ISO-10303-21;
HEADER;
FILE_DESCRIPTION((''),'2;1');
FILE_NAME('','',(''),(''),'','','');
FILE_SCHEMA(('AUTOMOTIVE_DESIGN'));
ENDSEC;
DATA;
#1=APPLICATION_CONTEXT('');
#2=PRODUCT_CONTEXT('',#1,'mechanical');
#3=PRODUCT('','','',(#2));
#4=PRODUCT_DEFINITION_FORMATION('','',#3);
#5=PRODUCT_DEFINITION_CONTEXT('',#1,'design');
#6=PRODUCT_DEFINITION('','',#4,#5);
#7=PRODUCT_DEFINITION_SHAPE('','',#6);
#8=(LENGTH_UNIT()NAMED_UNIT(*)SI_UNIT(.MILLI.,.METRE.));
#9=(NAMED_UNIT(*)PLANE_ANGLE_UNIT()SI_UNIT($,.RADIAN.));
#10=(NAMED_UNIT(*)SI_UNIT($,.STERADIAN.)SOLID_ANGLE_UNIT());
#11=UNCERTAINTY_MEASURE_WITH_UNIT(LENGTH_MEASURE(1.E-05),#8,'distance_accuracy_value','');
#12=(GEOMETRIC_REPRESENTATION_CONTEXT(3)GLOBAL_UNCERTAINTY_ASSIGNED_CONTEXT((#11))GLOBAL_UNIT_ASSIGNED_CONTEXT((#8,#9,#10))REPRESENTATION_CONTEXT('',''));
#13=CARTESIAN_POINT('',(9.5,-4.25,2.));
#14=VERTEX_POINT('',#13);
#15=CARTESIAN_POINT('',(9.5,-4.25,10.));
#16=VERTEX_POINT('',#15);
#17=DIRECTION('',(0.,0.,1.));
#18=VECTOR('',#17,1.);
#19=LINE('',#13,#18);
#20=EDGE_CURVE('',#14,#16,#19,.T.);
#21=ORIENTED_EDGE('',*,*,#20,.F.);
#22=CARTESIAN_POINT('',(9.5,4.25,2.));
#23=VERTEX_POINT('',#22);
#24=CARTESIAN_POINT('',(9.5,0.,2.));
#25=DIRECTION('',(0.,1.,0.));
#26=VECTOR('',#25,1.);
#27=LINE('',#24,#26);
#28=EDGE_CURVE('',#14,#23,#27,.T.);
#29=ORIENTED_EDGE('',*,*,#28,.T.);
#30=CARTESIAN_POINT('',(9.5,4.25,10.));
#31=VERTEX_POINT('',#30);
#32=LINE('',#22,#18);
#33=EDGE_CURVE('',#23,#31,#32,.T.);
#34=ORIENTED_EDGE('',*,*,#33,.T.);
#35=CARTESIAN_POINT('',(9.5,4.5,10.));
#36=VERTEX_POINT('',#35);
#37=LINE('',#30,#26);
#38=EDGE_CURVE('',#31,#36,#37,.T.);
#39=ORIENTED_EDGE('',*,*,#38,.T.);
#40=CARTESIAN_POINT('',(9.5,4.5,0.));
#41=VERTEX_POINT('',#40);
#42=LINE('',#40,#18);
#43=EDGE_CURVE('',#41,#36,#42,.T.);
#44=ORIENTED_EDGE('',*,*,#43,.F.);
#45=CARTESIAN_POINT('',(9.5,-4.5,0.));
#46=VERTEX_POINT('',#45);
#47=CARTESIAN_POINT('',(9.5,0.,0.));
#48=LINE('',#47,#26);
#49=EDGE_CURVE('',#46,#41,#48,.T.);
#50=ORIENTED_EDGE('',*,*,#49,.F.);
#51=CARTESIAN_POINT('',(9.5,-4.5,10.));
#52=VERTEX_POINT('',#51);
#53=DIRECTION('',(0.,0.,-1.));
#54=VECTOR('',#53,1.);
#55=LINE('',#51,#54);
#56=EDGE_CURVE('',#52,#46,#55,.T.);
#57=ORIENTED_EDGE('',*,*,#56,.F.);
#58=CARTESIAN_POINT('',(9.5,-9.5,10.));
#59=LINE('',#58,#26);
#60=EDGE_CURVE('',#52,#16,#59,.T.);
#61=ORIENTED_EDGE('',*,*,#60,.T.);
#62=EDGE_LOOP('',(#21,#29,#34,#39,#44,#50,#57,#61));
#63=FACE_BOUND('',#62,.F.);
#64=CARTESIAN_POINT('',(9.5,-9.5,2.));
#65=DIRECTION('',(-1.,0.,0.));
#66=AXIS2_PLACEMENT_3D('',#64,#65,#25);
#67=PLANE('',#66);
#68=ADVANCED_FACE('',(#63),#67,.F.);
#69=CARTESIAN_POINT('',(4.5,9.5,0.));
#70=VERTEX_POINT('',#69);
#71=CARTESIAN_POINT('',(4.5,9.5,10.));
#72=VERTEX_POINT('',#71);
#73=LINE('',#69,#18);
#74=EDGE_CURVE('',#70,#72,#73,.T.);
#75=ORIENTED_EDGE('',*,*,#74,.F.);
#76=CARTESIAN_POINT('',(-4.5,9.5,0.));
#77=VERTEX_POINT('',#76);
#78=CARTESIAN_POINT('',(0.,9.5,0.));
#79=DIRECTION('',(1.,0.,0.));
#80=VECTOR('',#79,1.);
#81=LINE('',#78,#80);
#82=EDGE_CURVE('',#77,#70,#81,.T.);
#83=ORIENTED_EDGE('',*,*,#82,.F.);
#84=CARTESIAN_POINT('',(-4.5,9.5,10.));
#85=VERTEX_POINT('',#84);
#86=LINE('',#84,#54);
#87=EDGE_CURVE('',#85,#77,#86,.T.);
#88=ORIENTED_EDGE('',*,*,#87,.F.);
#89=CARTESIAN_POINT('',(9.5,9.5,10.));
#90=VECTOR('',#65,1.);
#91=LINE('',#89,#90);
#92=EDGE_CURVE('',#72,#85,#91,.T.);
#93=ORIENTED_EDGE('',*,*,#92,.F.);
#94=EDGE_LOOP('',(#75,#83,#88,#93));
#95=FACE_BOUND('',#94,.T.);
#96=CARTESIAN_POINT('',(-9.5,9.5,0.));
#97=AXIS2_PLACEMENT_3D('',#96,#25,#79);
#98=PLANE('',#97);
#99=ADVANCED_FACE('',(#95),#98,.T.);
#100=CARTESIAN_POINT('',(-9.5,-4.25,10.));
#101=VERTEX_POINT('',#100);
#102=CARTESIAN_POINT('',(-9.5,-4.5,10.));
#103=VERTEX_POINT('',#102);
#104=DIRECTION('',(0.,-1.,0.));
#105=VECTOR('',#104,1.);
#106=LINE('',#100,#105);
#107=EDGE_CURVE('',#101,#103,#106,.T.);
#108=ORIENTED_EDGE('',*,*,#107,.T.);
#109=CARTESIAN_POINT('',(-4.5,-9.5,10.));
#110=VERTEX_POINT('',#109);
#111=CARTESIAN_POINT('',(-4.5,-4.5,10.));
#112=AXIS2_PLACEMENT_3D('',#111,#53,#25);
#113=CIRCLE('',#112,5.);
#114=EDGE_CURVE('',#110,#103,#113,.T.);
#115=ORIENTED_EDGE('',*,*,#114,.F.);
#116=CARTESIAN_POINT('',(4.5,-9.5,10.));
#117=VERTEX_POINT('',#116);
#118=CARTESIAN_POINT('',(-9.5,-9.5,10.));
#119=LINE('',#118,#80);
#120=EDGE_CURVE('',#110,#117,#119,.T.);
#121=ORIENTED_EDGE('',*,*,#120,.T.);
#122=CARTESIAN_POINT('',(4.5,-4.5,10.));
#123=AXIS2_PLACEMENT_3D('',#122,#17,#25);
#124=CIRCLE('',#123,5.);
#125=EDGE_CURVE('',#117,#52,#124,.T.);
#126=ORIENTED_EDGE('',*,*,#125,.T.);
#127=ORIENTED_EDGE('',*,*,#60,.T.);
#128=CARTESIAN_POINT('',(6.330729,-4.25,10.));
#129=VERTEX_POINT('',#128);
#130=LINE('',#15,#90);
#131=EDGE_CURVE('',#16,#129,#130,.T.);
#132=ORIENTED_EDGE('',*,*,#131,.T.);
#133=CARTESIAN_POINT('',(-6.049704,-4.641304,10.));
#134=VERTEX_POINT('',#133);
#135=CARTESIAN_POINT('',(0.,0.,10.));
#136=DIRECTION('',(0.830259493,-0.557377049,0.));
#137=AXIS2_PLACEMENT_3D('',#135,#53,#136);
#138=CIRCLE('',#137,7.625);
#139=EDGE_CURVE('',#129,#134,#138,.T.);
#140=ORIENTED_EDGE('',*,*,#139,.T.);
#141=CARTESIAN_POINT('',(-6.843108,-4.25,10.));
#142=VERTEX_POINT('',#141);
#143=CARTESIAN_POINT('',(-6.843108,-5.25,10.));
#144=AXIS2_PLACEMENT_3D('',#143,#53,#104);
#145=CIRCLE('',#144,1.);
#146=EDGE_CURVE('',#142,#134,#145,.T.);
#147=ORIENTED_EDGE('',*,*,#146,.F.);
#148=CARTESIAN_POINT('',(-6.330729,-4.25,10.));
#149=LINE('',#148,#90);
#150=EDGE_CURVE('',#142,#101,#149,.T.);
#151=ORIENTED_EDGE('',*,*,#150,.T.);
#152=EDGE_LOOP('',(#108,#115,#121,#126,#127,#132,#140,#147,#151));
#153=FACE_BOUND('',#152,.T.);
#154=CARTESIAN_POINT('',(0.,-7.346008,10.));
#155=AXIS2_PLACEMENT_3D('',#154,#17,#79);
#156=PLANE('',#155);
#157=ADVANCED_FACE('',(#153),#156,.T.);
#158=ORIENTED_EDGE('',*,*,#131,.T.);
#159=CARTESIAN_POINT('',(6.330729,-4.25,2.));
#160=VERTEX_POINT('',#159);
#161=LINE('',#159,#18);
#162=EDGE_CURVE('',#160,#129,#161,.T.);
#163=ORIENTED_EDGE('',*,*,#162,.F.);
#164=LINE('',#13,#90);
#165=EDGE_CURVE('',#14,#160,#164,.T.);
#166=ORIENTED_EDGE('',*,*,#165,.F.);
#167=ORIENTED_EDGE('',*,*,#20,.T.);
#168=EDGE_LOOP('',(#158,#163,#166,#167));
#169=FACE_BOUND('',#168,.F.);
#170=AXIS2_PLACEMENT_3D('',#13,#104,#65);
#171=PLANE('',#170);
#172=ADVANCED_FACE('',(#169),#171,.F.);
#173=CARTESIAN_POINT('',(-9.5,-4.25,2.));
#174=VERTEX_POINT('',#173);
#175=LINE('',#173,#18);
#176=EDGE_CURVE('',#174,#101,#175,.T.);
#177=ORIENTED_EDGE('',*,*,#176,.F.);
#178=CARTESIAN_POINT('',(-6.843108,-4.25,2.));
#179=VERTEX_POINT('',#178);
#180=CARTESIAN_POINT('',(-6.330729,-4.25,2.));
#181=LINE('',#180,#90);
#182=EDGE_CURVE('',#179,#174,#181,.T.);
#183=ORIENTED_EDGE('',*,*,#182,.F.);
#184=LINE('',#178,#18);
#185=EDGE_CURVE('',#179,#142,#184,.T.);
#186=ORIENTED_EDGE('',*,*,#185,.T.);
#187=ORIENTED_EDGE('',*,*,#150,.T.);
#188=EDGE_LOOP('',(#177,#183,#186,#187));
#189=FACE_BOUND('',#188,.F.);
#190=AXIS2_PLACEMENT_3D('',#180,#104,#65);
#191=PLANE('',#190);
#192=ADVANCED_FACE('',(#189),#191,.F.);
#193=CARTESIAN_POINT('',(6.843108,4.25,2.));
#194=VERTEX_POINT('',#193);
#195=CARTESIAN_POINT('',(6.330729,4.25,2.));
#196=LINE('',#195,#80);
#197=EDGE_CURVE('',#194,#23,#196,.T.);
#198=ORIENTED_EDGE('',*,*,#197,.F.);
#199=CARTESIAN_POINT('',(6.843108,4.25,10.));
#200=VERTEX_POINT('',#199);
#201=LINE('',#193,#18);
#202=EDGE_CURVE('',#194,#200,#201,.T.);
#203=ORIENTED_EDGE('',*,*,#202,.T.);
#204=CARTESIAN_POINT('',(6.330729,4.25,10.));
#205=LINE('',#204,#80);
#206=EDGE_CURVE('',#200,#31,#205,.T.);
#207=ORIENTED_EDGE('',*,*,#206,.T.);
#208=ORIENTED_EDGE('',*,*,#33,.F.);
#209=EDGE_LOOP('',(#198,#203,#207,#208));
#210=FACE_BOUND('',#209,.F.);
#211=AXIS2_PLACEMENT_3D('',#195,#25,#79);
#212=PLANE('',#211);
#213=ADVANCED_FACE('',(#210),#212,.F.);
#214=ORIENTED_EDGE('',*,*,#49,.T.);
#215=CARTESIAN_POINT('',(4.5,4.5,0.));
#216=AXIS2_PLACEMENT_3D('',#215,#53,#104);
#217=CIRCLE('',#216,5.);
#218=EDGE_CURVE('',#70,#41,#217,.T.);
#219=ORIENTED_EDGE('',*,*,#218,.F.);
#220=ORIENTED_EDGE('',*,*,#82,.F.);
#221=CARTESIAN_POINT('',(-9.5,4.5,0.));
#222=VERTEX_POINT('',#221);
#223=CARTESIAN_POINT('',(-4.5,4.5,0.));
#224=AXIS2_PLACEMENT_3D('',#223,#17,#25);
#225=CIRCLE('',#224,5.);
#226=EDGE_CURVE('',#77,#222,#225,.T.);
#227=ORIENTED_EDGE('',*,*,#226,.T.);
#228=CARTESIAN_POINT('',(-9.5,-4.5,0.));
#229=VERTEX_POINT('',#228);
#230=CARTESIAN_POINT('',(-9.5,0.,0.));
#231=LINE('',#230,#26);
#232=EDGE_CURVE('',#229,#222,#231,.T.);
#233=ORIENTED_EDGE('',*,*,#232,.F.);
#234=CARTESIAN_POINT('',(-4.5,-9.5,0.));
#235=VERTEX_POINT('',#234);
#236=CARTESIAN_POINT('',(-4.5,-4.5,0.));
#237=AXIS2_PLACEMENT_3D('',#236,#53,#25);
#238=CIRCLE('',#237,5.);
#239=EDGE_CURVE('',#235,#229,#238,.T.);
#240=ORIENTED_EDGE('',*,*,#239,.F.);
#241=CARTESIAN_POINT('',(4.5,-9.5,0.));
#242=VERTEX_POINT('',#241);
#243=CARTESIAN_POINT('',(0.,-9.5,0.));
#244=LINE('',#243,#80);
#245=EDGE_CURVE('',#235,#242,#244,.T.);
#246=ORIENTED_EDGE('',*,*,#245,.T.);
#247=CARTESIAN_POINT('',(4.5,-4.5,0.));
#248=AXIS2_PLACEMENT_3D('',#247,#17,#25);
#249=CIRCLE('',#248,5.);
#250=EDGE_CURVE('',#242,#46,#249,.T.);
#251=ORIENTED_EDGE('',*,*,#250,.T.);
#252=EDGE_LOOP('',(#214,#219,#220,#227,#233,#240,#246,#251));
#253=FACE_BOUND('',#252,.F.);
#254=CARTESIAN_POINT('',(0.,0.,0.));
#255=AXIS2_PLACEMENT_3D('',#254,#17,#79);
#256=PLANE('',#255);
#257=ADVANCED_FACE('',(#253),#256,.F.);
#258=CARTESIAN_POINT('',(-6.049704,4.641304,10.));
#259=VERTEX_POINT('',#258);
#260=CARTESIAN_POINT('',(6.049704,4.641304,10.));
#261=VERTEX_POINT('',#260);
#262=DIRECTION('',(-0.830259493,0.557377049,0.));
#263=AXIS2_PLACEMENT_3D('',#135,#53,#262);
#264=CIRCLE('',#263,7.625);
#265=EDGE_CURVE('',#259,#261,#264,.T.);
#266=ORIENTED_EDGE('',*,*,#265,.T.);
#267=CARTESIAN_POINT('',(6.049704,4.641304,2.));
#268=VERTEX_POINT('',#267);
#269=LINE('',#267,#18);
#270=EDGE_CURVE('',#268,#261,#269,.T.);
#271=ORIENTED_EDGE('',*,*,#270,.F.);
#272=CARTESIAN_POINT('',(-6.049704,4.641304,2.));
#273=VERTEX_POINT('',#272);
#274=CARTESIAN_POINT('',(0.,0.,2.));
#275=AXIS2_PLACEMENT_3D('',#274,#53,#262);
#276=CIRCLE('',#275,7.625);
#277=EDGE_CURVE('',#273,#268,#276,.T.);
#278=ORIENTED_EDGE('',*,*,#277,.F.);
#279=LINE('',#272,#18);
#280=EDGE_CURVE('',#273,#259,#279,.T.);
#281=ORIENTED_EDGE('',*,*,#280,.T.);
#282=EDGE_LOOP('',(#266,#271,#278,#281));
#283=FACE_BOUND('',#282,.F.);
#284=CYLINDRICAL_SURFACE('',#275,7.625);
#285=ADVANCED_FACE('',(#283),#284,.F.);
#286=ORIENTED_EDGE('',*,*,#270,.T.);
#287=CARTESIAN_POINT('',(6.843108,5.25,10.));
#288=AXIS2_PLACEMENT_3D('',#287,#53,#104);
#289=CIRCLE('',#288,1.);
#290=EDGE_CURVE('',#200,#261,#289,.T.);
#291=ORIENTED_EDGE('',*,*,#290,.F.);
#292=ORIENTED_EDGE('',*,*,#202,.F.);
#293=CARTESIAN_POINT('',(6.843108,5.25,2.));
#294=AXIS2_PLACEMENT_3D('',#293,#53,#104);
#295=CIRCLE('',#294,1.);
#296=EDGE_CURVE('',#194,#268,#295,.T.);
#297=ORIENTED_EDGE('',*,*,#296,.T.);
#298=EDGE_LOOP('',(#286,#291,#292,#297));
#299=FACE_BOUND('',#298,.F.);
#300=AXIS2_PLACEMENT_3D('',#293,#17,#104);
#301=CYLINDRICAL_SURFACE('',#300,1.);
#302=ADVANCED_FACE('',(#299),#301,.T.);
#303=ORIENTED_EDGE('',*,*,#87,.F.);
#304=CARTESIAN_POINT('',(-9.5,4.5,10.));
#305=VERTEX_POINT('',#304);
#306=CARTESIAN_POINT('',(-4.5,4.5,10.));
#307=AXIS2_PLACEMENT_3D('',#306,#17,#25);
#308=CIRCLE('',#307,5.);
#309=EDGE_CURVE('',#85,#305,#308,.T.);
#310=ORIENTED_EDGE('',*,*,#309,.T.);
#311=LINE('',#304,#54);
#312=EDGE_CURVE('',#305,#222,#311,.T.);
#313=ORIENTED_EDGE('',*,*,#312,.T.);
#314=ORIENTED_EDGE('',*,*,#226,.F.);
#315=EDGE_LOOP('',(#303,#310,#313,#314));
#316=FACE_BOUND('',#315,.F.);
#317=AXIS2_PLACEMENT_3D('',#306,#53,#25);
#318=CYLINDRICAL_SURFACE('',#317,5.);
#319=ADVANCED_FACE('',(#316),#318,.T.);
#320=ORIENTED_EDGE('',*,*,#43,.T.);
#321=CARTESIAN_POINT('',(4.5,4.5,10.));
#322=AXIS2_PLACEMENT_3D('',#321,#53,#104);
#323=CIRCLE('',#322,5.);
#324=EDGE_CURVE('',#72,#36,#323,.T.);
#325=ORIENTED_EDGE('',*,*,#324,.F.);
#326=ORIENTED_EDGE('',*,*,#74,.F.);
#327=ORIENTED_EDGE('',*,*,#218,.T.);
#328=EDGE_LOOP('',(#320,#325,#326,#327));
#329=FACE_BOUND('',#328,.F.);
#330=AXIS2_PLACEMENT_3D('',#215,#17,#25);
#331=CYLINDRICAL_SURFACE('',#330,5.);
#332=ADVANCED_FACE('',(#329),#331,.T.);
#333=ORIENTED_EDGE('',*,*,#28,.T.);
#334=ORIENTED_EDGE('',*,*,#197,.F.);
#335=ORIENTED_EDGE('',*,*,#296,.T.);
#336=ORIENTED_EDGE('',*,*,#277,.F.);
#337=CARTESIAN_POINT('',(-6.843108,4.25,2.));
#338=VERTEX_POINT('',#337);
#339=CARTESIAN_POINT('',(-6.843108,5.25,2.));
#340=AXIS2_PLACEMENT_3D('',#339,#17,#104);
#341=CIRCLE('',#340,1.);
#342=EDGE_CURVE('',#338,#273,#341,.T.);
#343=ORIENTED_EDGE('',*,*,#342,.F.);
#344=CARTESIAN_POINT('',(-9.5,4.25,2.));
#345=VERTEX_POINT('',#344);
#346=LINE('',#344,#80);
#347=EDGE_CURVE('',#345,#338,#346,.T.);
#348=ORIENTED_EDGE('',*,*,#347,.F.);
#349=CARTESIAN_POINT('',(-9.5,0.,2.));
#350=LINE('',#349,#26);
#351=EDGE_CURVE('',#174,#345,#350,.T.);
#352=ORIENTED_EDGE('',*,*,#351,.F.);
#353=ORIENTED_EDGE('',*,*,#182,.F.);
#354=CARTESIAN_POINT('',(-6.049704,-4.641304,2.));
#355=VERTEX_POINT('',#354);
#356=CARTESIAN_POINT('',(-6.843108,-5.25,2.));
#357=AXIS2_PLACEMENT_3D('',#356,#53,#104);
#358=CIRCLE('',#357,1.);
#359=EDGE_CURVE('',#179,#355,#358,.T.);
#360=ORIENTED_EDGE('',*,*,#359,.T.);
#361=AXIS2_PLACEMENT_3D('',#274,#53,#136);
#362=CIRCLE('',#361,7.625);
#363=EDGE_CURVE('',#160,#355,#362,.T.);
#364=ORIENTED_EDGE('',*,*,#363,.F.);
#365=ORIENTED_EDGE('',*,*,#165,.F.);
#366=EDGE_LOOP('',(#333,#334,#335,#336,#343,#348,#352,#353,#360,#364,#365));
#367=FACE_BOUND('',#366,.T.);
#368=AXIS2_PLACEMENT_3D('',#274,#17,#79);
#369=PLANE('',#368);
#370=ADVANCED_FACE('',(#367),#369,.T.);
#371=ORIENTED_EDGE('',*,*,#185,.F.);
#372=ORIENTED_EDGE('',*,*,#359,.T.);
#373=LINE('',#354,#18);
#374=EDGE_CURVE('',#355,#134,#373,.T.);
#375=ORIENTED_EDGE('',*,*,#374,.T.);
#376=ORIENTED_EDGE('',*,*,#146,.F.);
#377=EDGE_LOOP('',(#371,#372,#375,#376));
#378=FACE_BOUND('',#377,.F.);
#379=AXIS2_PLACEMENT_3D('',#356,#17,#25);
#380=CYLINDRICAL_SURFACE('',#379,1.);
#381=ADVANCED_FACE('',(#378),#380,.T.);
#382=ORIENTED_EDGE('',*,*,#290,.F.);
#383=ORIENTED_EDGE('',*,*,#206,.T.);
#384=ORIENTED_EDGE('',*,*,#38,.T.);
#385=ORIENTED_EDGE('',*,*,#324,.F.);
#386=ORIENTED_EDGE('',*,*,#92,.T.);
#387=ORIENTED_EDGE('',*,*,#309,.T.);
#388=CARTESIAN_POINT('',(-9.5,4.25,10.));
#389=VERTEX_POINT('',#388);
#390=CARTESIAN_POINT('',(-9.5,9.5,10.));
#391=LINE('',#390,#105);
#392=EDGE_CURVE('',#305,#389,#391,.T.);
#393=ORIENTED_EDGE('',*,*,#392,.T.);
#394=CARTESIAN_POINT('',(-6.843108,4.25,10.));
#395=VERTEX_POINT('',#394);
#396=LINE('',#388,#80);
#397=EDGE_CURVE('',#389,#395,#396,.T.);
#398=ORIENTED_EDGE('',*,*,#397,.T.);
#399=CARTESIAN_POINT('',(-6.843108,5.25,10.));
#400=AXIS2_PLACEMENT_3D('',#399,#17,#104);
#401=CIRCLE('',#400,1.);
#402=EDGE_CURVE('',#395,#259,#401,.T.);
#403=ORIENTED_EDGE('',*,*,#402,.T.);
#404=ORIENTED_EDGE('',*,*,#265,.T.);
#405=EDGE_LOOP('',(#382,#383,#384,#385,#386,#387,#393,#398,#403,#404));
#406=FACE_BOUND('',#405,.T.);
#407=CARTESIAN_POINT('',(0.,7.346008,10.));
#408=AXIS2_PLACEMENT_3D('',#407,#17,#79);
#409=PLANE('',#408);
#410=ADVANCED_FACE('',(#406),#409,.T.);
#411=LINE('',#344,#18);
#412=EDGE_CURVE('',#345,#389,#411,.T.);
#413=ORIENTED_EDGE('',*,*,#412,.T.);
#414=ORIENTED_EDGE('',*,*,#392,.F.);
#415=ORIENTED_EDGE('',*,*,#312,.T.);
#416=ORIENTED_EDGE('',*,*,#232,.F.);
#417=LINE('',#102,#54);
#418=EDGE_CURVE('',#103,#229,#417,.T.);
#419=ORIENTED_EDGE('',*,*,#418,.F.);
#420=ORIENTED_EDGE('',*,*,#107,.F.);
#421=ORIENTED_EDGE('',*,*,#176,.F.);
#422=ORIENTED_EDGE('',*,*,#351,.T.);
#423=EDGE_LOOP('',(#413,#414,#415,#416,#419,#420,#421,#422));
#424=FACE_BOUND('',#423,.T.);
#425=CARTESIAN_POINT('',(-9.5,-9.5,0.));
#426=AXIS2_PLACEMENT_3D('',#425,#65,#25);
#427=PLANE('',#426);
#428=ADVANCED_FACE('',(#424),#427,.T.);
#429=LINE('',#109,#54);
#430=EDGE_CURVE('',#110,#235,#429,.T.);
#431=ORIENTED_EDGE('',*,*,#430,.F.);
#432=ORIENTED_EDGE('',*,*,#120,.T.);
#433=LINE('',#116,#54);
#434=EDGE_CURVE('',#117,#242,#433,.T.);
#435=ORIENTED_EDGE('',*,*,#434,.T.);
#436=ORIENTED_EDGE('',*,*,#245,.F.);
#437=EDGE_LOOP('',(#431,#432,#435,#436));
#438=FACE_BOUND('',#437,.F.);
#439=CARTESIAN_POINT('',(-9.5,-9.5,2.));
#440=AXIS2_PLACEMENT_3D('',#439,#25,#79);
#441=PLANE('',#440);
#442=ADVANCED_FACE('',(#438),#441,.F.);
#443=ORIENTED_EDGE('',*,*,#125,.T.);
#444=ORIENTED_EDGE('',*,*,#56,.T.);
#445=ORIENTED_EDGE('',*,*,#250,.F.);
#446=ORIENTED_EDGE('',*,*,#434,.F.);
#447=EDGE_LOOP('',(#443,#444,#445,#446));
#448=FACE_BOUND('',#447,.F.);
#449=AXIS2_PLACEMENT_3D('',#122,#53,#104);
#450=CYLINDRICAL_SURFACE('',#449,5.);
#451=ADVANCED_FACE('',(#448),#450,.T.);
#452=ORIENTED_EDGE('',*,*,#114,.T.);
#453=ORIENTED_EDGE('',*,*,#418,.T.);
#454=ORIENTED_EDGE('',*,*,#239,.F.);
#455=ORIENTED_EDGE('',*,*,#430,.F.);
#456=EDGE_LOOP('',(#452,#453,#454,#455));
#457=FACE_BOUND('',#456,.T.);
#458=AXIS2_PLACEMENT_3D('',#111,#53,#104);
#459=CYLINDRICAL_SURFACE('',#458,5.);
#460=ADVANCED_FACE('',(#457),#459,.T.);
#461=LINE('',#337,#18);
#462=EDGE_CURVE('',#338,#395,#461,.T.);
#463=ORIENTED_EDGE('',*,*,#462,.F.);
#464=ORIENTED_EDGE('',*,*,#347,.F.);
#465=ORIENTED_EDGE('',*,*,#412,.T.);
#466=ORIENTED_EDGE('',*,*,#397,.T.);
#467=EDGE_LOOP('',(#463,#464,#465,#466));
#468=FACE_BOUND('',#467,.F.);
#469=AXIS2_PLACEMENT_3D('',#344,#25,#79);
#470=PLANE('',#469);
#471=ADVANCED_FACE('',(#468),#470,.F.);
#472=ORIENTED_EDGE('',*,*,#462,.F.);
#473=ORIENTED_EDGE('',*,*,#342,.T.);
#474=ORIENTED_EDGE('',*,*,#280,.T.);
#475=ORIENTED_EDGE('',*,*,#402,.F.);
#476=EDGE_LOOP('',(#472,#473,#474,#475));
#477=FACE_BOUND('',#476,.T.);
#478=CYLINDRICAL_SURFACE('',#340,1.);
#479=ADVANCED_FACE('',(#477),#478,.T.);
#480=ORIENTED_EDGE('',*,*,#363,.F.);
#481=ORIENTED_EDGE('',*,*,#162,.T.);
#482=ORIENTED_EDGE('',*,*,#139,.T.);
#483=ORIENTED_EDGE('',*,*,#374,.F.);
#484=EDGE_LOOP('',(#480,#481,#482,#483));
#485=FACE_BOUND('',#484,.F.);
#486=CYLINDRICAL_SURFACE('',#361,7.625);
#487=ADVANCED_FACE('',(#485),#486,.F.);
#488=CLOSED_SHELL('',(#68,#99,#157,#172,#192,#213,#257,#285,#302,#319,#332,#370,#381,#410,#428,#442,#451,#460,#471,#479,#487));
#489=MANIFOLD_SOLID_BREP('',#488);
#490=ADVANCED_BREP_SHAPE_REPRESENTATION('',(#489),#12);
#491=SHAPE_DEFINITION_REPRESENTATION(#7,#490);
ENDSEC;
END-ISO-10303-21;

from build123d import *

# Parameters (mm, degrees)
F0_W     = 19
F0_H     = 19
F1_DEPTH = 2
F3_DEPTH = 8
F4_R     = 5
F5_R     = 1


with BuildPart() as f1:
    # F0 (on Top) → F1 (new body)
    with BuildSketch(Plane.XY):
        Rectangle(F0_W, F0_H)
    extrude(amount=F1_DEPTH)

    # F2 (on face) → F3 (join)
    with BuildSketch(Plane.XY.offset(2)):
        with BuildLine():
            Line((9.5, -4.25), (6.3307286311, -4.25))
            ThreePointArc((6.3307286311, -4.25), (0, -7.625), (-6.3307286311, -4.25))
            Line((-6.3307286311, -4.25), (-9.5, -4.25))
            Line((-9.5, -4.25), (-9.5, -9.5))
            Line((-9.5, -9.5), (9.5, -9.5))
            Line((9.5, -9.5), (9.5, -4.25))
        make_face()
        with BuildLine():
            ThreePointArc((-6.3307286311, 4.25), (0, 7.625), (6.3307286311, 4.25))
            Line((6.3307286311, 4.25), (9.5, 4.25))
            Line((9.5, 4.25), (9.5, 9.5))
            Line((9.5, 9.5), (-9.5, 9.5))
            Line((-9.5, 9.5), (-9.5, 4.25))
            Line((-9.5, 4.25), (-6.3307286311, 4.25))
        make_face()
    extrude(amount=F3_DEPTH)

    # F4
    f4_edges = [f1.edges().sort_by_distance(p)[0] for p in [
        (-9.5, -9.5, 5),
        (9.5, -9.5, 5),
        (9.5, 9.5, 5),
        (-9.5, 9.5, 5),
    ]]
    fillet(f4_edges, radius=F4_R)

    # F5
    f5_edges = [f1.edges().sort_by_distance(p)[0] for p in [
        (6.330729, 4.25, 6),
        (-6.330729, 4.25, 6),
        (-6.330729, -4.25, 6),
    ]]
    fillet(f5_edges, radius=F5_R)


solid = f1.part
